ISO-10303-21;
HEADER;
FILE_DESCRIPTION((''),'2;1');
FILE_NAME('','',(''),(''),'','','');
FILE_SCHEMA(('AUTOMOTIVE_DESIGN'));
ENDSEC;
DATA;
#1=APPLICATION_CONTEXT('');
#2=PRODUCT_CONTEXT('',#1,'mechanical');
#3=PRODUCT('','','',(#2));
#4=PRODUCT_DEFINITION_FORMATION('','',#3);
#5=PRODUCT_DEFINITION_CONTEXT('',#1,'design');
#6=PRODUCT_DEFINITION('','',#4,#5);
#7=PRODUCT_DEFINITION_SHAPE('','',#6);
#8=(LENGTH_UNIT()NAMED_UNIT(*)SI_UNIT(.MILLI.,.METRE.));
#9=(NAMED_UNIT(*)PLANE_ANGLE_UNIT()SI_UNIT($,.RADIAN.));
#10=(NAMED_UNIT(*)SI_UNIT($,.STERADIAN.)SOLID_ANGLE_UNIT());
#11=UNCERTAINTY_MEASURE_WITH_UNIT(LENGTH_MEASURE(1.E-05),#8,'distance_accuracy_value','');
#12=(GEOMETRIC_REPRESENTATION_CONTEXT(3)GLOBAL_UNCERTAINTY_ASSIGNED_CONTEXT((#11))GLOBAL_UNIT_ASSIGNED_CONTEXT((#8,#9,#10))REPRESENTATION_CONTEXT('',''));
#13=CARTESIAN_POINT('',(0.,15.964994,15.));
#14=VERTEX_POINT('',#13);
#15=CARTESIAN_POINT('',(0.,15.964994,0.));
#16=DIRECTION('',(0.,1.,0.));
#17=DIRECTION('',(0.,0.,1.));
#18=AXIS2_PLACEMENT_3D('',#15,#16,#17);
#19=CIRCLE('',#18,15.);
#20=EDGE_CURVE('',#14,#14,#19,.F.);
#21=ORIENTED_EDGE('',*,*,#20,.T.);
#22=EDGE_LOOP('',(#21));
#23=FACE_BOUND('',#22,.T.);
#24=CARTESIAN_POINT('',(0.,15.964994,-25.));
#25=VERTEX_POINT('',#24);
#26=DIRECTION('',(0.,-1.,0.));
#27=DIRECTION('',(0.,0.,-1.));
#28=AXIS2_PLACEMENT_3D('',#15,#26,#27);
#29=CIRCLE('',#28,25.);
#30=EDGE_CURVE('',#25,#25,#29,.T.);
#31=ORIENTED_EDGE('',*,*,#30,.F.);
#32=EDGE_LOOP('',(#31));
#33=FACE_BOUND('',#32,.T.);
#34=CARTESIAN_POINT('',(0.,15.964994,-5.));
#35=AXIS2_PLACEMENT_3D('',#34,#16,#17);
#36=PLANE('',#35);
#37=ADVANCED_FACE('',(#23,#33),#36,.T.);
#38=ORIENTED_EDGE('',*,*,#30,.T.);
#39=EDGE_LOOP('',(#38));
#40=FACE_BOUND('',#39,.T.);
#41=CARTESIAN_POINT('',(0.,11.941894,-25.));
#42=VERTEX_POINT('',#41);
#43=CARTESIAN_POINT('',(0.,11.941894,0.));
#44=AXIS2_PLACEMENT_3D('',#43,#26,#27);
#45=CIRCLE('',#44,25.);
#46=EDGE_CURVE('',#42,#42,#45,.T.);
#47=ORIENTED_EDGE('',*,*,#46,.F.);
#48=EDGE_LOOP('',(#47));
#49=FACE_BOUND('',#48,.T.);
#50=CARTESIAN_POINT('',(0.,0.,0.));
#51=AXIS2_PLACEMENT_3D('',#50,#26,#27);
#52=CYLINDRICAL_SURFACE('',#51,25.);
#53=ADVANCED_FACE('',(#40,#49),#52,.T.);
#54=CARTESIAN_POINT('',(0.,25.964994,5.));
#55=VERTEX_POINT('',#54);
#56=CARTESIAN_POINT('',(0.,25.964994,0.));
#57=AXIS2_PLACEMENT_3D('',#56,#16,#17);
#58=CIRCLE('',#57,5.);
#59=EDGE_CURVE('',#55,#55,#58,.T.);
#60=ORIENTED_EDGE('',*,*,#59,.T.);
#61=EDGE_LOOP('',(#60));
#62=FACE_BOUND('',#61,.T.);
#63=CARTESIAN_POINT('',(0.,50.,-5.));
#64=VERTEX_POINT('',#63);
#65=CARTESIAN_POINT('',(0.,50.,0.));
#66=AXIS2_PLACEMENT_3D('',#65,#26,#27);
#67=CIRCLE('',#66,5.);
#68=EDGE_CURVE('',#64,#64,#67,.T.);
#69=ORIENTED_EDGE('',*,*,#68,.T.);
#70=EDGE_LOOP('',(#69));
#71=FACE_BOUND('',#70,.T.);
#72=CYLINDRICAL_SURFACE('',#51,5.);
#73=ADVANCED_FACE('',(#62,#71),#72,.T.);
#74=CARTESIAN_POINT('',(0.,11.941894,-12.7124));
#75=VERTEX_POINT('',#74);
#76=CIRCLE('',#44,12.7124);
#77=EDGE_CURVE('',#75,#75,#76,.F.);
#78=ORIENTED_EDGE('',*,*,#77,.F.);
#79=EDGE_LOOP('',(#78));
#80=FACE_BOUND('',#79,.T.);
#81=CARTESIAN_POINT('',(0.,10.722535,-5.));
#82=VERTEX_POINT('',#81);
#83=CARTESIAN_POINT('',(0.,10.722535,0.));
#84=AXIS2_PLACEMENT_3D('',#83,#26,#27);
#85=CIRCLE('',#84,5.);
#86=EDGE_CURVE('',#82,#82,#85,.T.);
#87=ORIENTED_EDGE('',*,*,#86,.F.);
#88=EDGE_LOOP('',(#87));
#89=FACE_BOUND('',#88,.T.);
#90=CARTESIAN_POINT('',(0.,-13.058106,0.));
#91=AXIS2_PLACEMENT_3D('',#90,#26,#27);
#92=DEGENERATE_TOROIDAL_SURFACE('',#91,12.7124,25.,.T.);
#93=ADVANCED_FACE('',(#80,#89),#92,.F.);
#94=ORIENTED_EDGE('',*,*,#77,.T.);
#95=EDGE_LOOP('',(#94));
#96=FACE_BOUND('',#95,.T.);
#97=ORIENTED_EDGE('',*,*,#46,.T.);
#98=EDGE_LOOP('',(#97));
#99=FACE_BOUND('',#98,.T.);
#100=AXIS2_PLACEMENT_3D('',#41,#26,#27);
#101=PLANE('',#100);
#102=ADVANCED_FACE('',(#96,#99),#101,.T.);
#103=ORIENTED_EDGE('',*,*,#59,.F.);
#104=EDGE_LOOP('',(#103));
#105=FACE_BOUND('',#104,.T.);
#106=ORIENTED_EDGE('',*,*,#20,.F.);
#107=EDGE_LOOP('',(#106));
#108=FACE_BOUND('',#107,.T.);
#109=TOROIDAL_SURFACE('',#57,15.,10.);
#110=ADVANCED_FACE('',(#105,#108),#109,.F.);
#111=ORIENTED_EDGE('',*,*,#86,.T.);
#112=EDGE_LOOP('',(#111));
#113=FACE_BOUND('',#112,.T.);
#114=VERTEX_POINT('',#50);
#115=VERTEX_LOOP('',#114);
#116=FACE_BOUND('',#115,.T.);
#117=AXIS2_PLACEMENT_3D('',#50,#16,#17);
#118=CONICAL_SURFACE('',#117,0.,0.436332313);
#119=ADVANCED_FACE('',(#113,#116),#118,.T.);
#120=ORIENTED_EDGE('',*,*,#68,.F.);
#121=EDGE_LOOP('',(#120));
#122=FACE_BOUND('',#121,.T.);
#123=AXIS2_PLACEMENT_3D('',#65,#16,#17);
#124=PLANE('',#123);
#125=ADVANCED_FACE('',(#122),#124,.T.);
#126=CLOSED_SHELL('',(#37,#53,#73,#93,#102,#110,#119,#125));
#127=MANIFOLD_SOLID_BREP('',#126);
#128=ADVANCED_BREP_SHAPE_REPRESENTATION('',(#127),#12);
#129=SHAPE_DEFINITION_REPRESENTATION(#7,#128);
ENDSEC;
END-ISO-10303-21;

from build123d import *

# Parameters (mm, degrees)
FILLET1_R  = 25
FILLET12_R = 10


with BuildPart() as part:
    # Sketch1 → Revolve1 (revolve)
    with BuildSketch(Plane(origin=(0, 0, 0), x_dir=(0, 0, -1), z_dir=(1, 0, 0))):
        Polygon((0, 0), (5, 10.722534603), (5, 11.94189357), (25, 11.94189357), (25, 15.964993567), (5, 15.964993567), (5, 50), (0, 50), align=None)
    revolve(axis=Axis((0, 0, 0), (0, 1, 0)))

    # Fillet1
    # the kernel refuses this fillet: 25 mm, written as the material it adds along each edge
    with BuildSketch(Plane(origin=(0, 11.94189357, 0), x_dir=(0, 0, -1), z_dir=(1, 0, 0))) as fillet1_piece_1:
        with BuildLine():
            CenterArc((12.712399892, -25), FILLET1_R, 90, 17.968615565)
            Line((12.712399892, 0), (12.712399892, 0.5))
            Line((12.712399892, 0.5), (5, 0.5))
            Line((5, 0.5), (4.5, 0))
            ThreePointArc((4.5, 0), (4.5, -0.609679484), (4.845752002, -0.743746147))
            Line((4.845752002, -0.743746147), (5, -1.219358968))
        make_face()
    revolve(axis=Axis((0, 11.94189357, 0), (0, 1, 0)))

    # Fillet12
    fillet12_edges = [part.edges().sort_by_distance(p)[0] for p in [
        (0, 15.964993567, 5),
    ]]
    fillet(fillet12_edges, radius=FILLET12_R)


solid = part.part
